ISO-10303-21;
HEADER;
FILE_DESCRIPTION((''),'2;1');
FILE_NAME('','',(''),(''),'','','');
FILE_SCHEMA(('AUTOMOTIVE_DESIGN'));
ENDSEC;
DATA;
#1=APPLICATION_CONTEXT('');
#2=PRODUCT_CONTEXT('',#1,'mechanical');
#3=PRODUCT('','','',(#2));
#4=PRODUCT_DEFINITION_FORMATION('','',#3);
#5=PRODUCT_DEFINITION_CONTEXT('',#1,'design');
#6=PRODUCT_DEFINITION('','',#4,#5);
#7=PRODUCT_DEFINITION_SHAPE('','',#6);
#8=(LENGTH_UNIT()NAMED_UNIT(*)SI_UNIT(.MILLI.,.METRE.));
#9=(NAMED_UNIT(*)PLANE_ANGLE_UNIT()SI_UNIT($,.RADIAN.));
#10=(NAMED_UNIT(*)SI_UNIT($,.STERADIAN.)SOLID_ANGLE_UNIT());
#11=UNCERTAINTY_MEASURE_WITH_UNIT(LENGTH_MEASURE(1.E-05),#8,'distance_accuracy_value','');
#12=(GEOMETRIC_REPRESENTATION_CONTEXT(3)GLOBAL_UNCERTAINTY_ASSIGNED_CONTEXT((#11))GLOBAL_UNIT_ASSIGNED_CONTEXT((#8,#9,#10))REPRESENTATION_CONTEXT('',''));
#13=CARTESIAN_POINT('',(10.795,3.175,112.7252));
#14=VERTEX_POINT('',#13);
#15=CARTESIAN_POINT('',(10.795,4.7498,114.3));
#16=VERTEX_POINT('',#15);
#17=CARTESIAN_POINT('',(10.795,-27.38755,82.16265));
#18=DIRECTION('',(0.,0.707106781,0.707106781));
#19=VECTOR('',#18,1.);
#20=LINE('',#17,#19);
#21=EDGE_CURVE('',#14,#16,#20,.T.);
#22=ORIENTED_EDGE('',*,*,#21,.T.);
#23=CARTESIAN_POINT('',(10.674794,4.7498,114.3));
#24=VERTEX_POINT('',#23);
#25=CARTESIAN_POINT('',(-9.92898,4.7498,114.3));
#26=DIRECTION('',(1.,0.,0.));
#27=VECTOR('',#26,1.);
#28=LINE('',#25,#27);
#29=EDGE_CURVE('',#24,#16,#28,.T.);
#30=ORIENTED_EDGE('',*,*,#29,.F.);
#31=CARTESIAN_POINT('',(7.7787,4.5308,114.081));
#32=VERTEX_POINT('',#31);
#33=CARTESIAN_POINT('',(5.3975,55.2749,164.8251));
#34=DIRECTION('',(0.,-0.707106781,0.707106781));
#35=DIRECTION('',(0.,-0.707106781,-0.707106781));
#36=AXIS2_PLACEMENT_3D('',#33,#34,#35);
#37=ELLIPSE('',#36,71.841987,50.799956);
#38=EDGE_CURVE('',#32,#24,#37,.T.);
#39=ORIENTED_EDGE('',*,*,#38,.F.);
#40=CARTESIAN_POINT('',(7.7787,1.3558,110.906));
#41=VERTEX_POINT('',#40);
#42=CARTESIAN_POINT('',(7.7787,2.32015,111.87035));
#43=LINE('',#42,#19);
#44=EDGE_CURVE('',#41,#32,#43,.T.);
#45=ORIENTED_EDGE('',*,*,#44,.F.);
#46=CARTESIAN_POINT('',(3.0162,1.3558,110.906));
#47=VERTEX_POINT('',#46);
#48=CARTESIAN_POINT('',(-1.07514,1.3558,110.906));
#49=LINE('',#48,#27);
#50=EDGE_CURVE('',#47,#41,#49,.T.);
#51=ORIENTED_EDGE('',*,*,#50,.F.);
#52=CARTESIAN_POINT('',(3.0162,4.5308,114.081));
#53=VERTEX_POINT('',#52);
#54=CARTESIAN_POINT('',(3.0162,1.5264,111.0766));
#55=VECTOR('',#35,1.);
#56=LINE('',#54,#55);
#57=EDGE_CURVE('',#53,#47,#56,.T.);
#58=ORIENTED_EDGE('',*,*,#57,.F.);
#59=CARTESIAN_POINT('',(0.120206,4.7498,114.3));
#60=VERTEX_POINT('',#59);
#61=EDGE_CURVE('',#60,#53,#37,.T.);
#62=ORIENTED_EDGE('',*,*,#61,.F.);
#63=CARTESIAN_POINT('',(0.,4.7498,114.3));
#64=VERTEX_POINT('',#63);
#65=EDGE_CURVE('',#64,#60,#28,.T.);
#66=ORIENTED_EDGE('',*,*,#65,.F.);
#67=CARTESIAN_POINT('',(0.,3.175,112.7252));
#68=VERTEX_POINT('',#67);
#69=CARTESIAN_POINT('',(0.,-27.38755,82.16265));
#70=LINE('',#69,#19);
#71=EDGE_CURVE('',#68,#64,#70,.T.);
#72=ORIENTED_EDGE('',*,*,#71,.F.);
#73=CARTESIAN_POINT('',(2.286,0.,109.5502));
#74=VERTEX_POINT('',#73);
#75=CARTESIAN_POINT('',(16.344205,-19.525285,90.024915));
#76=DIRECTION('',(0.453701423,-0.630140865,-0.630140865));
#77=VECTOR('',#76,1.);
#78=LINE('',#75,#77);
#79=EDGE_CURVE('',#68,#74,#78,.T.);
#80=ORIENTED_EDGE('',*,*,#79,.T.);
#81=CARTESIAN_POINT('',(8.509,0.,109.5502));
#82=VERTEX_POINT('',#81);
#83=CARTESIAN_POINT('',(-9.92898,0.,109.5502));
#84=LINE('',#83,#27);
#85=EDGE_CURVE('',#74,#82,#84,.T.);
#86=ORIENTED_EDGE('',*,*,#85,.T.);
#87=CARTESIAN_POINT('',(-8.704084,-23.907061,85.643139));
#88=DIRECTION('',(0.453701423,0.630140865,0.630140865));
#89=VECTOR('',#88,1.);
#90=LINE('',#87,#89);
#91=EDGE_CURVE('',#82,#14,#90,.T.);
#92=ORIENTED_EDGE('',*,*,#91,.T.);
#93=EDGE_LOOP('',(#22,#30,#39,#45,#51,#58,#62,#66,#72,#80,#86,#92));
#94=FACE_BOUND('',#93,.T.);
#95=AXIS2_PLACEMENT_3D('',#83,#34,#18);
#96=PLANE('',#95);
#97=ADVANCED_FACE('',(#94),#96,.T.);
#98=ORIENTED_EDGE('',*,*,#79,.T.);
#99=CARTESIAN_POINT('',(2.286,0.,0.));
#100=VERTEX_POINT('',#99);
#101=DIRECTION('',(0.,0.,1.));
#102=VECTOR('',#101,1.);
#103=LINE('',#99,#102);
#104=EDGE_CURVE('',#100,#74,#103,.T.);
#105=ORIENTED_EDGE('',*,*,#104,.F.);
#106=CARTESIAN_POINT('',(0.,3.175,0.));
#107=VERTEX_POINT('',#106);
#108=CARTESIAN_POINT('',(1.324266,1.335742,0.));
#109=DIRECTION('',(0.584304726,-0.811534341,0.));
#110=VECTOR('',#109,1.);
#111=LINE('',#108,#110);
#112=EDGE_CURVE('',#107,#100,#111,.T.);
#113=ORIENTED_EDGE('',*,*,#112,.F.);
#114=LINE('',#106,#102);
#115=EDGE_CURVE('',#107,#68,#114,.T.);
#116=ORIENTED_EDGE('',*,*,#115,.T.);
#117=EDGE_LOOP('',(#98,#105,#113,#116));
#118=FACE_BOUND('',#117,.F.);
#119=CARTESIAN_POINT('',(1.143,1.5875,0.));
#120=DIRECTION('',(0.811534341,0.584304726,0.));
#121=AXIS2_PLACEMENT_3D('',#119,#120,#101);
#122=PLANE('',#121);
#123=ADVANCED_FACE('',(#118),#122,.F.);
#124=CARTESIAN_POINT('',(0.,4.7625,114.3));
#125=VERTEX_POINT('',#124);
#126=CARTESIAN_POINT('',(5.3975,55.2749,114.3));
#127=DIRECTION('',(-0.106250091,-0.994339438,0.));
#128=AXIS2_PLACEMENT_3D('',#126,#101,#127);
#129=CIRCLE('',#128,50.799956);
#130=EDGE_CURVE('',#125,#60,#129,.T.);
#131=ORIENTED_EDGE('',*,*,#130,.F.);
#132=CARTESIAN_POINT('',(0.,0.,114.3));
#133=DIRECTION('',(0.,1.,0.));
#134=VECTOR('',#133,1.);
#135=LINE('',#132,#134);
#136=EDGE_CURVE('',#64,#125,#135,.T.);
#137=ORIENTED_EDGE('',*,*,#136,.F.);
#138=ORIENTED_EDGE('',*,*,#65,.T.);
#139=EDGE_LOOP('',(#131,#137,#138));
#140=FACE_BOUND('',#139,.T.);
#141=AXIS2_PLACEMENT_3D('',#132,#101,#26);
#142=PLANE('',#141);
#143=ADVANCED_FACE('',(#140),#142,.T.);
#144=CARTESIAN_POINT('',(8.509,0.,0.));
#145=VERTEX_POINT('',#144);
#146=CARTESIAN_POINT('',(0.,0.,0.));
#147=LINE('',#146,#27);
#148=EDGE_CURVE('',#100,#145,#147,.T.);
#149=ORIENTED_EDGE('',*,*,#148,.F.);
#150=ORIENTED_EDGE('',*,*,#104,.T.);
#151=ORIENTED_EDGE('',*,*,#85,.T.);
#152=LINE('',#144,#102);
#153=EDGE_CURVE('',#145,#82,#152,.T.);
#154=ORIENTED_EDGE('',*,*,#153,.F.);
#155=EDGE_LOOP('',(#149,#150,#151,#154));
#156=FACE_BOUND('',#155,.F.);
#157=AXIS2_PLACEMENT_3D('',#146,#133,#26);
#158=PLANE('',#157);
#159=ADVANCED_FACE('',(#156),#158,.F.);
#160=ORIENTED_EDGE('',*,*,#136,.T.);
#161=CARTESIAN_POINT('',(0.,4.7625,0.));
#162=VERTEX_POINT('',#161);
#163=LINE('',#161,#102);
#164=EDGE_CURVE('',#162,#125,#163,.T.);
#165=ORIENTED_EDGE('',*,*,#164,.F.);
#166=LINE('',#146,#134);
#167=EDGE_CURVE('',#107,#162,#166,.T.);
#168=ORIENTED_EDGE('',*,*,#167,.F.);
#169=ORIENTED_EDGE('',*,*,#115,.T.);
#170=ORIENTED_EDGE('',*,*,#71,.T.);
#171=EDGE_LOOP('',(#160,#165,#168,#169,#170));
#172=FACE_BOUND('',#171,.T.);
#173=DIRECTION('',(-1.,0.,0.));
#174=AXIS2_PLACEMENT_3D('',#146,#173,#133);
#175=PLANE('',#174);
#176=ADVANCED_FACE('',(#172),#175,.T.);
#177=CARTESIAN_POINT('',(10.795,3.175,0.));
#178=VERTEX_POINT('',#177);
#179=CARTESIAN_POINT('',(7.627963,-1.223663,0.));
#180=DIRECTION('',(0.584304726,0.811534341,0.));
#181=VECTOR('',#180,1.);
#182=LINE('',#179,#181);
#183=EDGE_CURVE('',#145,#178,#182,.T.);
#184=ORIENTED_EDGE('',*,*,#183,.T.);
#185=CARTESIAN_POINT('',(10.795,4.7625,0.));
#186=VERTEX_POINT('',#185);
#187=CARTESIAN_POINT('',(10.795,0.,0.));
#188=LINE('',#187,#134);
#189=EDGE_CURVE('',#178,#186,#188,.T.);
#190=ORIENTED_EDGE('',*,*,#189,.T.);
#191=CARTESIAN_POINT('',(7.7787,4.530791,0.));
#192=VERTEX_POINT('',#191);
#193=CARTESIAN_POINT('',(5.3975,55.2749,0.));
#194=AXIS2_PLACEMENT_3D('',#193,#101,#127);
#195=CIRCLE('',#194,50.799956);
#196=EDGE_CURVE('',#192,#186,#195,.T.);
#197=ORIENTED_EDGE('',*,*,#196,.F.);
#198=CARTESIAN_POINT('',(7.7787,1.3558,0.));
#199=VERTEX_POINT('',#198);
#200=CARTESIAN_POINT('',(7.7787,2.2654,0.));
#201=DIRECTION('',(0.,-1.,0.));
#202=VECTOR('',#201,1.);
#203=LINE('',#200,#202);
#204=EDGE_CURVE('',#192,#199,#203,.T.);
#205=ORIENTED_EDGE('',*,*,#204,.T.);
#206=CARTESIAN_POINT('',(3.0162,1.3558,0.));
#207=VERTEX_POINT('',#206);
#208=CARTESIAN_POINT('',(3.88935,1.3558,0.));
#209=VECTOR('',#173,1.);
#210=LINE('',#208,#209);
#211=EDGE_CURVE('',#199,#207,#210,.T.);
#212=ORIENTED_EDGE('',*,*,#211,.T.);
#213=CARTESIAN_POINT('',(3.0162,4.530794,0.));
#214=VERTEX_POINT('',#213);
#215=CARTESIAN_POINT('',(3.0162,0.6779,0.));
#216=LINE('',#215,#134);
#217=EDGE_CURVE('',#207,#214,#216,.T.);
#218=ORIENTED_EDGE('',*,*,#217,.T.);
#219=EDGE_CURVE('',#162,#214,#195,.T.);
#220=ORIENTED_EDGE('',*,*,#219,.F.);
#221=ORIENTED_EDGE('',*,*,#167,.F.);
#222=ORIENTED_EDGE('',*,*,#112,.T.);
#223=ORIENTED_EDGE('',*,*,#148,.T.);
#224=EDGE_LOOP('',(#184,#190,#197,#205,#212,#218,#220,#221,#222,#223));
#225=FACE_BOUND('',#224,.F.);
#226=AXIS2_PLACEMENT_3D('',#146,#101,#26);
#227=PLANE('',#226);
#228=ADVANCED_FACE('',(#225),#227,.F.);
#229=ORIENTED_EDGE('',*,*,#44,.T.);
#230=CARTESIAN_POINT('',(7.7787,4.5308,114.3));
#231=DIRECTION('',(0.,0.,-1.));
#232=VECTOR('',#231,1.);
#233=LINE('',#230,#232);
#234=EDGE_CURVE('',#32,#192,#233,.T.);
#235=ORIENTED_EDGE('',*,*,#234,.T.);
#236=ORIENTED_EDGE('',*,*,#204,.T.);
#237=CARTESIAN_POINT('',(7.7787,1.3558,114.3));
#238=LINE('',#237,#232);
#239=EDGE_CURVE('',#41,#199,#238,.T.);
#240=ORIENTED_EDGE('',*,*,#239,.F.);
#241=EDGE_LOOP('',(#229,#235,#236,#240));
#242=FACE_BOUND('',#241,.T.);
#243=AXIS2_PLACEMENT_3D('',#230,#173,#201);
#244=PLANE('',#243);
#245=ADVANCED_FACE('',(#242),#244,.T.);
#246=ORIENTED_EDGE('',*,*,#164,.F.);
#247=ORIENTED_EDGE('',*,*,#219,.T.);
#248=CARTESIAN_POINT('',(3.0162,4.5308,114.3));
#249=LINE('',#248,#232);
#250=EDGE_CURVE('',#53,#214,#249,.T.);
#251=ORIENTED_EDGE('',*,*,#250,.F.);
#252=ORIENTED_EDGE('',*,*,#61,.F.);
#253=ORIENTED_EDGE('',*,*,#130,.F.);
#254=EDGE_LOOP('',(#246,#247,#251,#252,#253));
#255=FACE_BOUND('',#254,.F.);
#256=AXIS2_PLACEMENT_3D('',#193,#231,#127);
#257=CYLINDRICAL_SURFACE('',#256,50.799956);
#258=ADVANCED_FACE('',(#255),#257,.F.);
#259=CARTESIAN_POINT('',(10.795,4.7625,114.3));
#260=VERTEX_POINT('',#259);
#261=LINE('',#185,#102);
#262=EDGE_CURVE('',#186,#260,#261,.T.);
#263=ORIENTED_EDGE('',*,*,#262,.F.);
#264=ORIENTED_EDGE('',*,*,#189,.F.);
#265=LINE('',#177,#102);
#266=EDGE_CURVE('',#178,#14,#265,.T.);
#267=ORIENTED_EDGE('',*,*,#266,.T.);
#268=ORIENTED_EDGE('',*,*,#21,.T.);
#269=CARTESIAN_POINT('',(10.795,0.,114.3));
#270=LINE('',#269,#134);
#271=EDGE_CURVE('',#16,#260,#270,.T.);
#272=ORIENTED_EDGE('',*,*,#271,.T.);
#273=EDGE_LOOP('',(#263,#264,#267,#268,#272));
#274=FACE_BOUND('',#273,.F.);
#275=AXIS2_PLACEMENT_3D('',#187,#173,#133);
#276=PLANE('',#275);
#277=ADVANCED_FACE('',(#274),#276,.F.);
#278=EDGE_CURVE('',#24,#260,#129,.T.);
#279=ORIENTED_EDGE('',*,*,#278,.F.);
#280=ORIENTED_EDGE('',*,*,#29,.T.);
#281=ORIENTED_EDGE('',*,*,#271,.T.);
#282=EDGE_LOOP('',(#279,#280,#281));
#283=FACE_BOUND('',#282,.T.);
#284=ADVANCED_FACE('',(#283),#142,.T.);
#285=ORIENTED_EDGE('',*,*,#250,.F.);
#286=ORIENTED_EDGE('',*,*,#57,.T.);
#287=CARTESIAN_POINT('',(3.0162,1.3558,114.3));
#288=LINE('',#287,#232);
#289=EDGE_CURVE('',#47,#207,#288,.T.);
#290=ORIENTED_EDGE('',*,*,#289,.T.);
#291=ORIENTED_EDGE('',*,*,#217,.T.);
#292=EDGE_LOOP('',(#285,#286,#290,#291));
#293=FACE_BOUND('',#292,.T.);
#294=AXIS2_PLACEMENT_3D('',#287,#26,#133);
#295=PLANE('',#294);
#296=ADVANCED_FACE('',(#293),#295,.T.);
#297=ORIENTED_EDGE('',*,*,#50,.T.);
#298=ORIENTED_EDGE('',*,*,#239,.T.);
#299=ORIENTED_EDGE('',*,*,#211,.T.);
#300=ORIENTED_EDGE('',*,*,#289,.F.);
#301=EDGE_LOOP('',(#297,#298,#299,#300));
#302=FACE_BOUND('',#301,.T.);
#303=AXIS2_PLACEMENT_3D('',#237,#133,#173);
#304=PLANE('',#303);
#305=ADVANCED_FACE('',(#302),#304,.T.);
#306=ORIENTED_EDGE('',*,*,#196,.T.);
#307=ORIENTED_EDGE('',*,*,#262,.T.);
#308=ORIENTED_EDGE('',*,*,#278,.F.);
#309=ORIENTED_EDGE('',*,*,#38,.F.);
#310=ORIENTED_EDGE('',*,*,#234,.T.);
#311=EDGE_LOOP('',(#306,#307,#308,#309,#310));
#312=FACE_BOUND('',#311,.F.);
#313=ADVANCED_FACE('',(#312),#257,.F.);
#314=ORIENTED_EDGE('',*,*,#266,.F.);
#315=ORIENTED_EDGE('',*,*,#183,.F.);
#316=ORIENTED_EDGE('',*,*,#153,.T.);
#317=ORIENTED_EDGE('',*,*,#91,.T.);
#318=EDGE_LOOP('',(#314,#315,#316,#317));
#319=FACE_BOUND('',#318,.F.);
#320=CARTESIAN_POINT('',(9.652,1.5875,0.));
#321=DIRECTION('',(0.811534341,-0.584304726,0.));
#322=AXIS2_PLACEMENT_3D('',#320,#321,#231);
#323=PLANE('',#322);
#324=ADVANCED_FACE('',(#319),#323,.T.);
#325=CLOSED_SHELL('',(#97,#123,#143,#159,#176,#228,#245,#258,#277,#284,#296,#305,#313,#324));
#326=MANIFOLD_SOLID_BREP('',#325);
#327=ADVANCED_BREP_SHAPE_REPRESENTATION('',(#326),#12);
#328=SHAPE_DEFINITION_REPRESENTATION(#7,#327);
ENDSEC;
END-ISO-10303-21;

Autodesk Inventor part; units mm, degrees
ref_plane "YZ Plane" through (0, 0, 0) normal (1, 0, 0) x (0, 1, 0)
ref_plane "XZ Plane" through (0, 0, 0) normal (0, 1, 0) x (-1, 0, 0)
ref_plane "XY Plane" through (0, 0, 0) normal (0, 0, 1) x (1, 0, 0)
sketch "Sketch1" plane through (0, 0, 0) normal (0, 0, 1) x (1, 0, 0)
  line L0 (0, 0) -> (10.795, 0)
  line L1 (10.795, 0) -> (10.795, 4.7625)
  line L2 (0, 0) -> (0, 4.7625)
  arc A0 (0, 4.7625) -> (10.795, 4.7625) centre (5.3975, 55.2749) ccw
  dimension "d0" = 50.8
  dimension "d1" = 10.795
  dimension "d2" = 4.7625
extrude "Extrusion1" add sketch "Sketch1" along normal blind 114.3
sketch "Sketch2" plane through (0, 0, 114.3) normal (0, 0, 1) x (1, 0, 0)
  arc A0 (0, 4.7625) -> (10.795, 4.7625) centre (5.3975, 55.2749) ccw projected
  line L0 (3.0162, 4.5308) -> (7.7787, 4.5308)
  line L1 (7.7787, 4.5308) -> (7.7787, 1.3558)
  line L2 (7.7787, 1.3558) -> (3.0162, 1.3558)
  line L3 (3.0162, 1.3558) -> (3.0162, 4.5308)
  point P0 (0, 0)
  point P1 (5.3975, 4.5308)
  point P2 (5.3975, 4.4749)
  dimension "d5" = 4.7625
  dimension "d6" = 3.175
extrude "Extrusion2" cut sketch "Sketch2" against normal through all contours A0 L1 L2 L3
chamfer "Chamfer2" distance 3.175 distance2 2.286 1 edges at (0, 0, 57.15) measured on face at (0, 3.175, 38.1)
chamfer "Chamfer3" distance 2.286 distance2 3.175 1 edges at (10.795, 0, 57.15) measured on face at (5.1223, 0, 38.1)
chamfer "Chamfer6" distance 4.7498 angle 45 1 edges at (5.3975, 0, 114.3)
properties part number "WireGuideToMiniSubExtender" material "ABS Plastic"
